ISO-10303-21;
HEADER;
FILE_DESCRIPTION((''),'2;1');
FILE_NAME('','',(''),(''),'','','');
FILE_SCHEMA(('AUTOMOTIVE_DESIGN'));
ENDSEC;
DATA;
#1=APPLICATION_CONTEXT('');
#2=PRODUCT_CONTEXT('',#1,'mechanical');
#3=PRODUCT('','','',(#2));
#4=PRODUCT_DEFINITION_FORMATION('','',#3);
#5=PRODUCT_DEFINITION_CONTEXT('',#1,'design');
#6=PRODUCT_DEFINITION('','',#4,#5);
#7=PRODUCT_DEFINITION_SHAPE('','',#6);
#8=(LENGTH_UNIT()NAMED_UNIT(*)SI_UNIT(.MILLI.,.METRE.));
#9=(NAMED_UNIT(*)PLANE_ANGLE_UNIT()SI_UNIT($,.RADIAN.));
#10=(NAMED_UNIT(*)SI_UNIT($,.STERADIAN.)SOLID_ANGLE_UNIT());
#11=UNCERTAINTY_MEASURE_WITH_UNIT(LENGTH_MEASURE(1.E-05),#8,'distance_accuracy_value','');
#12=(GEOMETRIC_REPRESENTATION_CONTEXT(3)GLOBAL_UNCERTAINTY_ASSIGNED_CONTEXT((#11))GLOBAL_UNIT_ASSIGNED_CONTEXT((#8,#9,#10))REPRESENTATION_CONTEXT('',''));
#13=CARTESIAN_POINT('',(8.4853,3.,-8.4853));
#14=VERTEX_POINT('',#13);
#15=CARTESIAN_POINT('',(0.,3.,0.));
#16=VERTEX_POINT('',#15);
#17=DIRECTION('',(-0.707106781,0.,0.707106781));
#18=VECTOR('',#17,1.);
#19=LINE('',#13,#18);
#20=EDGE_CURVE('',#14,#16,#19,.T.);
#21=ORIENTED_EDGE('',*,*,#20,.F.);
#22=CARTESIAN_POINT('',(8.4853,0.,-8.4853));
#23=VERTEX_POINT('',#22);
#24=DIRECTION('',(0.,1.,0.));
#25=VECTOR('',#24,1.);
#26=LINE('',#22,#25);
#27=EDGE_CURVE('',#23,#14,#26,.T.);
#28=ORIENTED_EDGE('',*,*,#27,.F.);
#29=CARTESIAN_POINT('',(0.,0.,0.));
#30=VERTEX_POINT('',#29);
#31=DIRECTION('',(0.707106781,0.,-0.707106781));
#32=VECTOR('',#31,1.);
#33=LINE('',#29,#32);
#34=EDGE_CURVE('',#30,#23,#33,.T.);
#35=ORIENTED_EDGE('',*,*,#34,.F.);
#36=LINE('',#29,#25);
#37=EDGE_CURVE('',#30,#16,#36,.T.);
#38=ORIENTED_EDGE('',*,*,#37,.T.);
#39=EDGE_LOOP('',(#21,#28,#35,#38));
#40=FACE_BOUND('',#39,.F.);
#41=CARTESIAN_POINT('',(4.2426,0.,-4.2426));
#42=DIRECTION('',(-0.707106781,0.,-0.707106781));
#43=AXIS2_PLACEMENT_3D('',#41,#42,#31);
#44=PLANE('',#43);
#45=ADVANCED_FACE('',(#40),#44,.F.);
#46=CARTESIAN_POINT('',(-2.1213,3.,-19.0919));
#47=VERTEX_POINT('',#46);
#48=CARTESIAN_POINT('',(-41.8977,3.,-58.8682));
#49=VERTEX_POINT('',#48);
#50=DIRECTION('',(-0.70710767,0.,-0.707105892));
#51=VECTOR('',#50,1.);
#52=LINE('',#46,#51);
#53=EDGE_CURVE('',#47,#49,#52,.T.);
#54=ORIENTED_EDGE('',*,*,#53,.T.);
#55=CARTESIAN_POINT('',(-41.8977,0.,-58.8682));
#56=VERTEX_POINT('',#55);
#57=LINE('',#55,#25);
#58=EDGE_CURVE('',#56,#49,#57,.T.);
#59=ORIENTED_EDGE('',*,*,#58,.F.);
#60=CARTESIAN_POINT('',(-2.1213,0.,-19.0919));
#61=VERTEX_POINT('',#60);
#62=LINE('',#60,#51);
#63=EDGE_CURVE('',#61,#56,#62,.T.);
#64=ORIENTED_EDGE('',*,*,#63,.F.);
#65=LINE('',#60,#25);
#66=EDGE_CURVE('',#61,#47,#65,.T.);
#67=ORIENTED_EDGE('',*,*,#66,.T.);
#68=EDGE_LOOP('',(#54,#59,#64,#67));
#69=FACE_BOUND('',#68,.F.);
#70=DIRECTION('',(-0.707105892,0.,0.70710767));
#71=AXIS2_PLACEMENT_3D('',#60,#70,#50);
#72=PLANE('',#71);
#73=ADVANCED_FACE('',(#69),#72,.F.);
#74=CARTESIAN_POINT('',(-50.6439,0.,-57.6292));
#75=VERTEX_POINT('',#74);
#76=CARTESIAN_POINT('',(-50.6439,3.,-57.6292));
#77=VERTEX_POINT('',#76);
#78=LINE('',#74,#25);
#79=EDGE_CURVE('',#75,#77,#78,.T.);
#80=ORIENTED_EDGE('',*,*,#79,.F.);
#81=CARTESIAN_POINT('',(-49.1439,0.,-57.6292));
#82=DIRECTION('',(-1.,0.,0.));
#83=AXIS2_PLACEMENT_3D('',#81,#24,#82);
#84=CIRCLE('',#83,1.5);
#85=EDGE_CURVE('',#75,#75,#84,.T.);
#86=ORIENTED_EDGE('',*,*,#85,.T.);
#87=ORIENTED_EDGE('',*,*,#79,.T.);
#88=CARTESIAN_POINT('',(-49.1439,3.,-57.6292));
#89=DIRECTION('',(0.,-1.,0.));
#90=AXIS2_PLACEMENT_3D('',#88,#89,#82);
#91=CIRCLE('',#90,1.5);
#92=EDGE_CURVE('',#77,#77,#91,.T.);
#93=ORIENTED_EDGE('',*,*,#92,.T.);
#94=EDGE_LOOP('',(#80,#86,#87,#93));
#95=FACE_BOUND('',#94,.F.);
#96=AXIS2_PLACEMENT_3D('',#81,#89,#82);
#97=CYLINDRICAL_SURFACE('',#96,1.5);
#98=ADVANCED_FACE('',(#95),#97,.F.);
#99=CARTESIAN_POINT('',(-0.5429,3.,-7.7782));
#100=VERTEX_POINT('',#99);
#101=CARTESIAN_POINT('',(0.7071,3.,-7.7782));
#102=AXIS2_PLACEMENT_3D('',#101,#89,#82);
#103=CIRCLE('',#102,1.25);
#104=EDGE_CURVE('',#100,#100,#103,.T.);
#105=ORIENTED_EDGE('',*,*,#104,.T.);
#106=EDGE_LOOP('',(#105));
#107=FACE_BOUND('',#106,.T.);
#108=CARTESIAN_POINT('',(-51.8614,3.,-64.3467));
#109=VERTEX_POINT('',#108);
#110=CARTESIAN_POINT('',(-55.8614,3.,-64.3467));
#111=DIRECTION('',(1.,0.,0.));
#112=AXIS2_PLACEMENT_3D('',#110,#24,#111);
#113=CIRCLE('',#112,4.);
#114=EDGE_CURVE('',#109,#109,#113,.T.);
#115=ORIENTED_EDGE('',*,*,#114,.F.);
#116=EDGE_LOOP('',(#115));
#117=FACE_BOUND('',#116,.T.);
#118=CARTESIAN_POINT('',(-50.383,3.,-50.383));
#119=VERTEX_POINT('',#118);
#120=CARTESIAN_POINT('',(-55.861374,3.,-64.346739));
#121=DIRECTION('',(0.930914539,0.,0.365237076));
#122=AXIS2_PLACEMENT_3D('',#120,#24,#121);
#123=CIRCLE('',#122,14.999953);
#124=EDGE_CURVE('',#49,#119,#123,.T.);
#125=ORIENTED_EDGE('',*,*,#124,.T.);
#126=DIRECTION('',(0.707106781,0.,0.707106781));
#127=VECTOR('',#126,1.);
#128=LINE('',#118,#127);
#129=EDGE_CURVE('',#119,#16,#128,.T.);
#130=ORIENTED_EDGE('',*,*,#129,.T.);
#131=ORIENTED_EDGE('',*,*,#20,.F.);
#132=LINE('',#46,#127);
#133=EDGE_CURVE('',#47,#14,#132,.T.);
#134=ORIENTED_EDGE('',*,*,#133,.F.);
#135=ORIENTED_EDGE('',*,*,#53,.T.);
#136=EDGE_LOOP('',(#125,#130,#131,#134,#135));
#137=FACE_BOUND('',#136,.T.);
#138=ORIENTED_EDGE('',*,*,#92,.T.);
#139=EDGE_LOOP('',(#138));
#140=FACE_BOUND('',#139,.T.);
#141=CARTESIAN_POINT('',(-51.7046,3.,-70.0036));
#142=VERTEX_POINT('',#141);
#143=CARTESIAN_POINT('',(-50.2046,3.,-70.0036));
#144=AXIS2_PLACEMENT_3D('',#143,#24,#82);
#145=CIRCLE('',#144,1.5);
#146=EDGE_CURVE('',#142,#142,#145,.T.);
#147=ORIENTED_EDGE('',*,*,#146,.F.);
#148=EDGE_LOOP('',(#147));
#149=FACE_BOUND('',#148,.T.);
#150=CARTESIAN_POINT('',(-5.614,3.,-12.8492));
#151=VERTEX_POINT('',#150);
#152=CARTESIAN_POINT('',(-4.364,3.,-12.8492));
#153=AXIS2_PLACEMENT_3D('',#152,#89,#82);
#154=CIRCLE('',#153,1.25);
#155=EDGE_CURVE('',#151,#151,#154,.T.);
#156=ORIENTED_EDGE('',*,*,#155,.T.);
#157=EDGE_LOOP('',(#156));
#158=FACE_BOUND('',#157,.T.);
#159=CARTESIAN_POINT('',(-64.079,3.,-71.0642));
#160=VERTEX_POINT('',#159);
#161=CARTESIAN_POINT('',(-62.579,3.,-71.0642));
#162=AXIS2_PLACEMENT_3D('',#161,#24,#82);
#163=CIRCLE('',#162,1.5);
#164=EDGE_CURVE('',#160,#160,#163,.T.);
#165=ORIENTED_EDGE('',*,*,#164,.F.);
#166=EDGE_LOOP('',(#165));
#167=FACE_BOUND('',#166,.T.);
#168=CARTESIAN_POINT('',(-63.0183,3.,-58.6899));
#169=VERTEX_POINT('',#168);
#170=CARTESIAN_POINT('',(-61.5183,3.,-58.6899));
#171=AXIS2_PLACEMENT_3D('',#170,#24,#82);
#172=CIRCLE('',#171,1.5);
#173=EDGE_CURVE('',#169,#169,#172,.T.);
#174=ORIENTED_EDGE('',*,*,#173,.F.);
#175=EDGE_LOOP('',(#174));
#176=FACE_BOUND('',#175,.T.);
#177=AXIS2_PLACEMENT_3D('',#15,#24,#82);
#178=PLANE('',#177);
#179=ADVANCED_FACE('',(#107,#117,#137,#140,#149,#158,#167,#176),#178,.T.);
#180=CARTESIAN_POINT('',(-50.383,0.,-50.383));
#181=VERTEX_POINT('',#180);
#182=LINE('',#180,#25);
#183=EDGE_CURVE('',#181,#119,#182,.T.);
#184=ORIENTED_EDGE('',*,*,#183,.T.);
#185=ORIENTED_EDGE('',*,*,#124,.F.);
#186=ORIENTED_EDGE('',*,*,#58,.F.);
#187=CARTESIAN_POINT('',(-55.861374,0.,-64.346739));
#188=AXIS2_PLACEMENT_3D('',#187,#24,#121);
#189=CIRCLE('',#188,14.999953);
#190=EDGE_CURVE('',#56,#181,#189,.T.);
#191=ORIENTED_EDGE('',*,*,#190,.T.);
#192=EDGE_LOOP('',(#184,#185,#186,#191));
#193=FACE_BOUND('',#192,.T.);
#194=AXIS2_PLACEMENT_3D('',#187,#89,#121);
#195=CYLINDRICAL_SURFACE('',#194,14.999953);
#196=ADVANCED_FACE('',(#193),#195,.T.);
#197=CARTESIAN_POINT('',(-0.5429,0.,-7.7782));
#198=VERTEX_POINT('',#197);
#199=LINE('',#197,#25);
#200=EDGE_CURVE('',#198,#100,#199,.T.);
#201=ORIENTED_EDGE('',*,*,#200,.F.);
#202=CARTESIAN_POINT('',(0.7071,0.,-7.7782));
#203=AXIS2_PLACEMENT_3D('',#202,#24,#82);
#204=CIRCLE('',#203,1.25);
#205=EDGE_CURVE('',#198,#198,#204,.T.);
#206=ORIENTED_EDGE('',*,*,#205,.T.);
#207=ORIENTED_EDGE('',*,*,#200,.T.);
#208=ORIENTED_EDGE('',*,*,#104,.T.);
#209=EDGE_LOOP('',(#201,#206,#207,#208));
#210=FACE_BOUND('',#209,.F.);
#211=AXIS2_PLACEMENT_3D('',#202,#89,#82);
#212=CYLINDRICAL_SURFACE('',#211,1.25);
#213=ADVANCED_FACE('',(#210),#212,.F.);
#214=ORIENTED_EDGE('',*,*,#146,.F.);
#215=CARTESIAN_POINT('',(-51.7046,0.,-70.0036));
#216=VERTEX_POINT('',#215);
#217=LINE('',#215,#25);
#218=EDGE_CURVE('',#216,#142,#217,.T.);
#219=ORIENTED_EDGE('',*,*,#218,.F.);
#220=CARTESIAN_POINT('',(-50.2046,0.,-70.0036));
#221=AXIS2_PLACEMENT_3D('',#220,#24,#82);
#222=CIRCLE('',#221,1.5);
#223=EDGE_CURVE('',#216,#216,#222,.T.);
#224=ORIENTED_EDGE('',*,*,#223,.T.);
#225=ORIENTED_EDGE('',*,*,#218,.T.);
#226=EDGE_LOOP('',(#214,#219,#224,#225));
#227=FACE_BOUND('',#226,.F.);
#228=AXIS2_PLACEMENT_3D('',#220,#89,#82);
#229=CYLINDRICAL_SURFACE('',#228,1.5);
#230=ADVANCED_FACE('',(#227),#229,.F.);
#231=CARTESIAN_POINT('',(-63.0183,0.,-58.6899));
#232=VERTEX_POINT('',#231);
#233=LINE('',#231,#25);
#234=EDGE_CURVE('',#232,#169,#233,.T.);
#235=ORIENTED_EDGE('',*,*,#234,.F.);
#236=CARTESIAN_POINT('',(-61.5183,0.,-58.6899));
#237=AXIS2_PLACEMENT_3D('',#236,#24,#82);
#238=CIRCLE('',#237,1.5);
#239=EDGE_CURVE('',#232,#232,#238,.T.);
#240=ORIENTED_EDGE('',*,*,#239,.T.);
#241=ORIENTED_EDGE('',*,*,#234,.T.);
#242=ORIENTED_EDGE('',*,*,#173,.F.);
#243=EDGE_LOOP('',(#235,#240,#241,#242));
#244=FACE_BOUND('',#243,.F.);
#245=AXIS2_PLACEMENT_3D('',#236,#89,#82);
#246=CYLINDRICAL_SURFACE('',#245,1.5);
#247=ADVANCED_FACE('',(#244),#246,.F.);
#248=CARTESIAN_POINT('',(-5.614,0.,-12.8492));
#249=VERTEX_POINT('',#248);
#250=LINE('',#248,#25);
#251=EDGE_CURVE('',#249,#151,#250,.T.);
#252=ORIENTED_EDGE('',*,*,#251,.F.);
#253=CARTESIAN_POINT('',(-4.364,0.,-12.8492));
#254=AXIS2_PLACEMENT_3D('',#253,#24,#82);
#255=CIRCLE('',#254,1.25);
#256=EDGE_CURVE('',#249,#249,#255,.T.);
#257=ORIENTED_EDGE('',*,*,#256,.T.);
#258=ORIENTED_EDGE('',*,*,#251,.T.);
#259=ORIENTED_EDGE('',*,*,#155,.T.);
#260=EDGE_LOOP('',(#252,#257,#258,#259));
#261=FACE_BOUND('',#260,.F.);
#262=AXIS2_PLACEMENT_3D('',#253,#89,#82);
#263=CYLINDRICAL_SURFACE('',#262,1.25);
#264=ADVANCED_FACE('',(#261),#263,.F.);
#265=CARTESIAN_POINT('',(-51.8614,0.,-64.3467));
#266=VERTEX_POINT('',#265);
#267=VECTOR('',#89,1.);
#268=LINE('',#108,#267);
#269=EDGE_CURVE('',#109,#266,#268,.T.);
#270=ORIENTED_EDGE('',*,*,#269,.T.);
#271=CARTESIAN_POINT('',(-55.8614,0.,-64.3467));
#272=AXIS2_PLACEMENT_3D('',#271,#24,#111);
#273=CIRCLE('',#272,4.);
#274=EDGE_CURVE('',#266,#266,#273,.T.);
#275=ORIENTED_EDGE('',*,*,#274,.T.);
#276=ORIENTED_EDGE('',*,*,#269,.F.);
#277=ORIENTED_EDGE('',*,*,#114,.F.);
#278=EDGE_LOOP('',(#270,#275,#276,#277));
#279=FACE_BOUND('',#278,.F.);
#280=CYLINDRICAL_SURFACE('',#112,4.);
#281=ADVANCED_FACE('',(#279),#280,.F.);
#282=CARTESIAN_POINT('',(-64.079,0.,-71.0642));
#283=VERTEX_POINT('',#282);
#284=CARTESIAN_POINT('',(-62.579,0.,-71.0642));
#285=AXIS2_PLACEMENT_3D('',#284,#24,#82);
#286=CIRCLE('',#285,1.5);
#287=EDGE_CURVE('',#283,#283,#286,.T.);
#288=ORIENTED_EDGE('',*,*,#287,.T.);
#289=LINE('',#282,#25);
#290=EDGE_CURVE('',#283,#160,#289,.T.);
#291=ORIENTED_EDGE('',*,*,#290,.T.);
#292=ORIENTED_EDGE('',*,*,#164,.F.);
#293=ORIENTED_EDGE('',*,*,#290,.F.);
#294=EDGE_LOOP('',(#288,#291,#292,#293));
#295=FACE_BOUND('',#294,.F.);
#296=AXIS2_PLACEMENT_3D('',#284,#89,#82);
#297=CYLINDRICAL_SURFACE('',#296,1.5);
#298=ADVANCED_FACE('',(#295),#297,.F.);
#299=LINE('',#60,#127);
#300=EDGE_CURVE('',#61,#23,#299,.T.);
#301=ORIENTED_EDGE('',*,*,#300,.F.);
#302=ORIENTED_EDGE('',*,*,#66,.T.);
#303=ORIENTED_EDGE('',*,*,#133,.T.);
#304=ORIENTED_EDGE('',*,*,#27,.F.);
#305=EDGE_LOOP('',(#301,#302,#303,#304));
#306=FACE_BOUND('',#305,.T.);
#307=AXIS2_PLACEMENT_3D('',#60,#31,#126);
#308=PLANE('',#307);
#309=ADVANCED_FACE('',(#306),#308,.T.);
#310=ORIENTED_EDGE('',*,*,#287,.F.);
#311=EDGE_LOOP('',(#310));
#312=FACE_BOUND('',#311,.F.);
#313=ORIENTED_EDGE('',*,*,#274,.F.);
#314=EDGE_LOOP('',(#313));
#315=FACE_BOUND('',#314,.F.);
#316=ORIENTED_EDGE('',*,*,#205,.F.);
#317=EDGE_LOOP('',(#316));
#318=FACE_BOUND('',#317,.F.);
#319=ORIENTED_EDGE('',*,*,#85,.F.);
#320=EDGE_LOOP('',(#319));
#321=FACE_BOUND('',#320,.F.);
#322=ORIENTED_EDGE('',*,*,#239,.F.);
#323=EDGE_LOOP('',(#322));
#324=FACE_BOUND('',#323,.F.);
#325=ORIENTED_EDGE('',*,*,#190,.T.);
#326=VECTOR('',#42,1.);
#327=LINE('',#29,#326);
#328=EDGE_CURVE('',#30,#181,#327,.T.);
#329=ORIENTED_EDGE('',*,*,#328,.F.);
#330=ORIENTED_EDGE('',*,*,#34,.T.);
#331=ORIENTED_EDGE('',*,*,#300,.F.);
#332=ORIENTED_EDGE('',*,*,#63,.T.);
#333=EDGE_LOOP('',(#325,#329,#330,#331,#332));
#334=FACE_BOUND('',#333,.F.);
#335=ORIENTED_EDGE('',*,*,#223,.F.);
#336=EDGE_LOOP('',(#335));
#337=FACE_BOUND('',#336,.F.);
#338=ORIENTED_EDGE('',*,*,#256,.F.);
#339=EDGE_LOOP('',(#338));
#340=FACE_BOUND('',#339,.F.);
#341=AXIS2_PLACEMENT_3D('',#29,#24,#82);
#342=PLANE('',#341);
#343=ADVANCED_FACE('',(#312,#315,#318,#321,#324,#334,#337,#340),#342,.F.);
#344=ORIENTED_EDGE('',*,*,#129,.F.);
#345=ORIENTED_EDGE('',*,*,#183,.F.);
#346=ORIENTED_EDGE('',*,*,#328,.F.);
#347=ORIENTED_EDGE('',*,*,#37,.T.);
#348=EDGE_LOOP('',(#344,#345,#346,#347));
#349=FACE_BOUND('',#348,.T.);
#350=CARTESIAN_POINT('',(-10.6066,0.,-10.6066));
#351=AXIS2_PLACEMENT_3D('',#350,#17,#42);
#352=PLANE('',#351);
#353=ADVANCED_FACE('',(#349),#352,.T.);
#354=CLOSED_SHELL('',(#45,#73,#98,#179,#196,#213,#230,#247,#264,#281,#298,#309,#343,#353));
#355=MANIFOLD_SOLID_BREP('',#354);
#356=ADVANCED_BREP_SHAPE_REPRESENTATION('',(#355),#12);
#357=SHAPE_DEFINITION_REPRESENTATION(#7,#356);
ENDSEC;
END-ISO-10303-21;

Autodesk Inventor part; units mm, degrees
ref_plane "YZ Plane" through (0, 0, 0) normal (1, 0, 0) x (0, 1, 0)
ref_plane "XZ Plane" through (0, 0, 0) normal (0, 1, 0) x (-1, 0, 0)
ref_plane "XY Plane" through (0, 0, 0) normal (0, 0, 1) x (1, 0, 0)
sketch "Sketch1" plane through (0, 0, 0) normal (0, 1, 0) x (-1, 0, 0)
  circle A0 centre (4.364, -12.8492) radius 1.25
  line L0 (2.1213, -19.0919) -> (-8.4853, -8.4853)
  line L1 (10.6066, -10.6066) -> (0, 0)
  line L2 (0, 0) -> (-8.4853, -8.4853)
  circle A1 centre (-0.7071, -7.7782) radius 1.25
  line L3 (2.1213, -19.0919) -> (41.8977, -58.8682)
  line L4 (10.6066, -10.6066) -> (50.383, -50.383)
  arc A2 (41.8977, -58.8682) -> (50.383, -50.383) centre (55.8614, -64.3467) ccw
  circle A3 centre (62.579, -71.0642) radius 1.5
  circle A4 centre (49.1439, -57.6292) radius 1.5
  circle A5 centre (50.2046, -70.0036) radius 1.5
  circle A6 centre (61.5183, -58.6899) radius 1.5
  line L5 (-4.2426, -4.2426) -> (46.1403, -54.6256)
  line L6 (46.1403, -54.6256) -> (55.8614, -64.3467)
  point P0 (0, 0)
  dimension "d3" = 3
  dimension "d4" = 3
  dimension "d5" = 3
  dimension "d6" = 3
  dimension "d12" = 71.2523
extrude "Extrusion1" add sketch "Sketch1" along normal blind 3
sketch "Sketch2" plane through (0, 3, 0) normal (0, 1, 0) x (1, 0, 0)
  arc A0 (-41.8977, 58.8682) -> (-50.383, 50.383) centre (-55.8614, 64.3467) ccw projected
  circle A1 centre (-55.8614, 64.3467) radius 4
  point P0 (0, 0)
  dimension "d9" = 8
extrude "Extrusion2" cut sketch "Sketch2" against normal blind 3
properties part number "Arm"
